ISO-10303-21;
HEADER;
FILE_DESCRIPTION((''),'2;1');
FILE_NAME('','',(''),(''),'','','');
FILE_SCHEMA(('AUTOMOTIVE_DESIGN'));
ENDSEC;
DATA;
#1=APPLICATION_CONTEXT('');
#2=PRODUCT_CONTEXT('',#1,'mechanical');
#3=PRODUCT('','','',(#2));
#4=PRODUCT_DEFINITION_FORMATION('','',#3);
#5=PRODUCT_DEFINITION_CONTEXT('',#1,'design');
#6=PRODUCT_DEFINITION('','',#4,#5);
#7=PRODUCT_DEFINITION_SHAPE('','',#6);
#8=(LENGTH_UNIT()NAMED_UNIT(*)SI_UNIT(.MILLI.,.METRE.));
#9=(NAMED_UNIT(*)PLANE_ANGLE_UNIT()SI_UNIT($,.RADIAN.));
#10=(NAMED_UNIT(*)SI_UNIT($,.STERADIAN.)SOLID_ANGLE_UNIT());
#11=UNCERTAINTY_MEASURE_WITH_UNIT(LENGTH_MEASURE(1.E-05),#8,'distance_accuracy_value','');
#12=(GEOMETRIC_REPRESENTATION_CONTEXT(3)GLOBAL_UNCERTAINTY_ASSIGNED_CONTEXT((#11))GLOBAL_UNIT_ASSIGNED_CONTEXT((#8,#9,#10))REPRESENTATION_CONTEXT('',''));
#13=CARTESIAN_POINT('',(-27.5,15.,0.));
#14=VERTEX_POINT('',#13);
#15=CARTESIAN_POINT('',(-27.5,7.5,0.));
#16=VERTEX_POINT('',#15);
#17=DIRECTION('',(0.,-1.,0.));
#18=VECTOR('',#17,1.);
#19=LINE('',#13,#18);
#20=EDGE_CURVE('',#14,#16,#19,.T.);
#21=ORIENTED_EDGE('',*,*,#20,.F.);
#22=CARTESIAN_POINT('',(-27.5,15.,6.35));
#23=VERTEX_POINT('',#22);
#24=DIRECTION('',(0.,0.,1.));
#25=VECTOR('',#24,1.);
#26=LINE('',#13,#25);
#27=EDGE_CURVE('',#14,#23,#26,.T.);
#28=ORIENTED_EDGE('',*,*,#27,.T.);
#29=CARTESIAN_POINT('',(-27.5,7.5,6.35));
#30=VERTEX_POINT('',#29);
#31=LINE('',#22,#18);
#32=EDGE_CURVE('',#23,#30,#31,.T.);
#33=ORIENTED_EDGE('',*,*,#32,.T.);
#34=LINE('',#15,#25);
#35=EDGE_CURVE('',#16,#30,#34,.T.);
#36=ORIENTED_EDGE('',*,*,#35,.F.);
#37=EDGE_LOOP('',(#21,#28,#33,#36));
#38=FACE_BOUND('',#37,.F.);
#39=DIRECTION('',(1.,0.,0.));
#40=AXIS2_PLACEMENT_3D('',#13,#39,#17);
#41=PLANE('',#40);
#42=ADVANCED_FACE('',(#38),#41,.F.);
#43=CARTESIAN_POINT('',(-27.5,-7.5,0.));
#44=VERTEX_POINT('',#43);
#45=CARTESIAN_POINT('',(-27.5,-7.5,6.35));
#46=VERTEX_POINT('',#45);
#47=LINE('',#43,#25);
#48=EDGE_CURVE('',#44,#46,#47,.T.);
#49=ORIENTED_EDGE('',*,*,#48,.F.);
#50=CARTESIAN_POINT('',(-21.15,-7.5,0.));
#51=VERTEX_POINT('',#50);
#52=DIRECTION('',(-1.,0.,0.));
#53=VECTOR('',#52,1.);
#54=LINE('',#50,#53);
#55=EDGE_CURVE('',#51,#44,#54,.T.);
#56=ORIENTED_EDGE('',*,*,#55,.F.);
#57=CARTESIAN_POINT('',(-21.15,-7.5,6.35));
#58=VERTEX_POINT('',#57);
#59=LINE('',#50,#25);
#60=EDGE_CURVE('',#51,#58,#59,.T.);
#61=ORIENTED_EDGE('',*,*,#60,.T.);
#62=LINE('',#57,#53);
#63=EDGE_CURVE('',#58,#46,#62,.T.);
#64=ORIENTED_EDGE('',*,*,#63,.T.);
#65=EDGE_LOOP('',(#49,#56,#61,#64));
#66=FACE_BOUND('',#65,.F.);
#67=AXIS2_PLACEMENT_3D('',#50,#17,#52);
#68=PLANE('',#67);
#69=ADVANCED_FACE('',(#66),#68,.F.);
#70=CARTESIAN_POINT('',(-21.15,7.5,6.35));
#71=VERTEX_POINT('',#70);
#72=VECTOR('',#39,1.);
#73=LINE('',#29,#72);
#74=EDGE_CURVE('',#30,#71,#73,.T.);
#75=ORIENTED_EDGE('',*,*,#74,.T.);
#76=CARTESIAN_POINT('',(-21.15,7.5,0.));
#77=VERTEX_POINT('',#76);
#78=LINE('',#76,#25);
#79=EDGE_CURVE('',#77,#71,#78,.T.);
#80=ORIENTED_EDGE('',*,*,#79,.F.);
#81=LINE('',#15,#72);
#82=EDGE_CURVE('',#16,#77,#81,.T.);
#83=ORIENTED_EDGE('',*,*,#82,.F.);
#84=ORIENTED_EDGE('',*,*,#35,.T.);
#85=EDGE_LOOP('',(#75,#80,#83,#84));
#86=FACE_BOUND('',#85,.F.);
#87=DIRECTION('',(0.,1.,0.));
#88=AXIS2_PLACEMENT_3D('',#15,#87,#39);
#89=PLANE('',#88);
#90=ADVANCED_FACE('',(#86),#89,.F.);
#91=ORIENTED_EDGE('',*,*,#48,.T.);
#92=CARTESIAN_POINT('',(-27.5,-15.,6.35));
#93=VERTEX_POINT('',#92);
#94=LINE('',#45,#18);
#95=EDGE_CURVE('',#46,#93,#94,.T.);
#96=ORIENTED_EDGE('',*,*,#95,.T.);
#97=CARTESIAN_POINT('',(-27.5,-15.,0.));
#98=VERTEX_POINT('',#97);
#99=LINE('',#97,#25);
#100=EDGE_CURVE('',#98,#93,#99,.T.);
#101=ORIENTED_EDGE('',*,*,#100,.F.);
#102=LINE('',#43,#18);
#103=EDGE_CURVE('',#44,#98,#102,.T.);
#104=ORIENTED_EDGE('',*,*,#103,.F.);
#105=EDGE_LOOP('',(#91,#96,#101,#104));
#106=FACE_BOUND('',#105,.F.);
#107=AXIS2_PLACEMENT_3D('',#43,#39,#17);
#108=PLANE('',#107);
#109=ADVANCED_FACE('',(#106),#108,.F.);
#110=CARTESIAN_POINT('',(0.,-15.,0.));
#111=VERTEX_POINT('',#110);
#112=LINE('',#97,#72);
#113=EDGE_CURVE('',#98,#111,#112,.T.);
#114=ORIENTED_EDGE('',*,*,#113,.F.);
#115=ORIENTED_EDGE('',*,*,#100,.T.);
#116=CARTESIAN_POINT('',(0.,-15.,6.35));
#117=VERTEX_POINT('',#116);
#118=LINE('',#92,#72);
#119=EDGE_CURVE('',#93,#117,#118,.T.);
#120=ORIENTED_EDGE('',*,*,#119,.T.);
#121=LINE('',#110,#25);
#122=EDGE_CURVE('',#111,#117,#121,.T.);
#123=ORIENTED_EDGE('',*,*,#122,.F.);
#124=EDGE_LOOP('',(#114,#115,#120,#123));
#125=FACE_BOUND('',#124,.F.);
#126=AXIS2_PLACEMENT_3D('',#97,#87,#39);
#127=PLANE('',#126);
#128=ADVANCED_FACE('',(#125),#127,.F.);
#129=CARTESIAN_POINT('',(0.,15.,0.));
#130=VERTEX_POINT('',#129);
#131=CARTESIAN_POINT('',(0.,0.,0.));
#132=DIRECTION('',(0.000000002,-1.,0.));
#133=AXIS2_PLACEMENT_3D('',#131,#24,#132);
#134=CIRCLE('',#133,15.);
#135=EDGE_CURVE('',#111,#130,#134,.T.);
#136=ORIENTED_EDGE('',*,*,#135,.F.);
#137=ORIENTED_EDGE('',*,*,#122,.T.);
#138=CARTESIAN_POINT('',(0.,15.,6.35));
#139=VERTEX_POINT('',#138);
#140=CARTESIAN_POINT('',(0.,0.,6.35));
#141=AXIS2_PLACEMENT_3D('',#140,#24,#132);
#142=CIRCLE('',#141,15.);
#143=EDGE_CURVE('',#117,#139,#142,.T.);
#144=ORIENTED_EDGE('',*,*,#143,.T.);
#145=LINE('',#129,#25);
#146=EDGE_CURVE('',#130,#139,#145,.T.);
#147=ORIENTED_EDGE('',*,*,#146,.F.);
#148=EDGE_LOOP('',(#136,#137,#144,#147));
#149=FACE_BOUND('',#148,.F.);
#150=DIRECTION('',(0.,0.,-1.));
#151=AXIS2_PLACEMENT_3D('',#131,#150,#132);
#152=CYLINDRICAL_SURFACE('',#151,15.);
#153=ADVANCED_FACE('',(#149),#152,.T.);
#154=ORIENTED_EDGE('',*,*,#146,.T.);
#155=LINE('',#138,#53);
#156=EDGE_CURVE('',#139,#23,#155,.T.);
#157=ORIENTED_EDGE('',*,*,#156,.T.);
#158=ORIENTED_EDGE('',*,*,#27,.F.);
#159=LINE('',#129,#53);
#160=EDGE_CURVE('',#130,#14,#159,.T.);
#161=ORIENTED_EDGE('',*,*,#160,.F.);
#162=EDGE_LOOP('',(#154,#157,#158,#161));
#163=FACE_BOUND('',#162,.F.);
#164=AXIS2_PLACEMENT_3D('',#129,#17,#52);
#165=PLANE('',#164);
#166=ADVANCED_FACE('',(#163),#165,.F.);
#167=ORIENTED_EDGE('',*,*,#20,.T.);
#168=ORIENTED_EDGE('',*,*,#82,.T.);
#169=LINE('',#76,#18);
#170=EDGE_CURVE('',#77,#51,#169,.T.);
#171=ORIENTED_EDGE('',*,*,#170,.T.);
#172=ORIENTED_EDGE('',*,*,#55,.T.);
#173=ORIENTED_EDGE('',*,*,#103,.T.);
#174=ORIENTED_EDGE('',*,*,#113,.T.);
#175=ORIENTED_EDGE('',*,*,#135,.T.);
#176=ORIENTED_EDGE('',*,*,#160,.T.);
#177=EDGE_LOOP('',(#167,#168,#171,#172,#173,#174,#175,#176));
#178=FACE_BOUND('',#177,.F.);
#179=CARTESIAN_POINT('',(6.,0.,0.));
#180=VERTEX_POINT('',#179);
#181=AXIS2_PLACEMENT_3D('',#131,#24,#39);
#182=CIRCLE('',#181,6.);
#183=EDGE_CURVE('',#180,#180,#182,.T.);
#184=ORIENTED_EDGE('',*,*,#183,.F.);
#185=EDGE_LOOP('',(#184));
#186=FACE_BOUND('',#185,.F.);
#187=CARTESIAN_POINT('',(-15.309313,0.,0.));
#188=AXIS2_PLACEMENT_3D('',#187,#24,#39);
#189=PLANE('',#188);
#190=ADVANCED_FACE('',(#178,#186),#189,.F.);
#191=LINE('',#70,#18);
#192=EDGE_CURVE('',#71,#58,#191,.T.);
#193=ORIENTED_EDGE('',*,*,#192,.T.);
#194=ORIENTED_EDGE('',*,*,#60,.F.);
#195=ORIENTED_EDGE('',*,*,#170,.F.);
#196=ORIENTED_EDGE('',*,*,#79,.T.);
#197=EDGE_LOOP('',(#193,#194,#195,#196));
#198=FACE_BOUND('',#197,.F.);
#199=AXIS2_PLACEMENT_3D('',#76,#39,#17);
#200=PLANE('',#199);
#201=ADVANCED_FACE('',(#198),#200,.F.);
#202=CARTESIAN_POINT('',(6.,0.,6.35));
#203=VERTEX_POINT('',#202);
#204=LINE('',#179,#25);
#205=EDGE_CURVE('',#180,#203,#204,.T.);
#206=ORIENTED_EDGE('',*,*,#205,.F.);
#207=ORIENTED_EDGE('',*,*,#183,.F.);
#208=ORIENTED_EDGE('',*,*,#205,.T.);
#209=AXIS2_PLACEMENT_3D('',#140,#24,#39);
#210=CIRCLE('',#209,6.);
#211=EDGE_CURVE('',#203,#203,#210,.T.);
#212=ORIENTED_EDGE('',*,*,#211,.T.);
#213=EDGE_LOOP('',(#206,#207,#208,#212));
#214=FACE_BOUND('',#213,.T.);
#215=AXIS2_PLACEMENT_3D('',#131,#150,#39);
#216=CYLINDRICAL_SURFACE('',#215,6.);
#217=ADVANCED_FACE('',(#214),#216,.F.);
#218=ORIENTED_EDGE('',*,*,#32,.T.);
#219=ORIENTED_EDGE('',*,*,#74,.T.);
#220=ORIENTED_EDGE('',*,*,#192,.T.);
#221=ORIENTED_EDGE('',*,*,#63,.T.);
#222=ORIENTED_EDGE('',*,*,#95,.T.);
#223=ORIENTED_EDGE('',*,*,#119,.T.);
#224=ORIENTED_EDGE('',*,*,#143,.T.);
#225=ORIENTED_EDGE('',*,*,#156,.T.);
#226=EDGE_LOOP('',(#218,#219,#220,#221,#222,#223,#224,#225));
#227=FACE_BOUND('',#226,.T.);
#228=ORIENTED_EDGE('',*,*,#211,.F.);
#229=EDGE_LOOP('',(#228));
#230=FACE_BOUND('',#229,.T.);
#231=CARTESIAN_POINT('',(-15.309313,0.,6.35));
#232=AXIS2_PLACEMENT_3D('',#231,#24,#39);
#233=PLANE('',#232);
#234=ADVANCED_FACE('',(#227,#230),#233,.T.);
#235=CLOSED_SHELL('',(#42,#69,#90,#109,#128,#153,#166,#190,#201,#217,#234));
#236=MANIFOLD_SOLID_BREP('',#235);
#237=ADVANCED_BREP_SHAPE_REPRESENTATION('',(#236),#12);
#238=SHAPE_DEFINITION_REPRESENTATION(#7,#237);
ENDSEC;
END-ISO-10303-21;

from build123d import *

# Parameters (mm, degrees)
F0_R     = 6
F1_DEPTH = 6.35


# Not quite as in the source:
# - a feature names something its author has since deleted; it is built from what else it names


with BuildPart() as f1:
    # F0 (on Top) → F1 (new body)
    with BuildSketch(Plane.XY):
        with BuildLine():
            Line((-27.5, 15), (-27.5, 7.5))
            Line((-27.5, 7.5), (-21.15, 7.5))
            Line((-21.15, 7.5), (-21.15, -7.5))
            Line((-21.15, -7.5), (-27.5, -7.5))
            Line((-27.5, -7.5), (-27.5, -15))
            Line((-27.5, -15), (3.27e-08, -15))
            ThreePointArc((3.27e-08, -15), (-15, -1.63e-08), (0, 15))
            Line((0, 15), (-27.5, 15))
        make_face()
        with BuildLine():
            ThreePointArc((15, 0), (10.6066017178, 10.6066017178), (0, 15))
            ThreePointArc((0, 15), (-15, -1.63e-08), (3.27e-08, -15))
            ThreePointArc((3.27e-08, -15), (10.6066017294, -10.6066017062), (15, 0))
        make_face()
        Circle(F0_R, mode=Mode.SUBTRACT)
    extrude(amount=F1_DEPTH)


solid = f1.part
